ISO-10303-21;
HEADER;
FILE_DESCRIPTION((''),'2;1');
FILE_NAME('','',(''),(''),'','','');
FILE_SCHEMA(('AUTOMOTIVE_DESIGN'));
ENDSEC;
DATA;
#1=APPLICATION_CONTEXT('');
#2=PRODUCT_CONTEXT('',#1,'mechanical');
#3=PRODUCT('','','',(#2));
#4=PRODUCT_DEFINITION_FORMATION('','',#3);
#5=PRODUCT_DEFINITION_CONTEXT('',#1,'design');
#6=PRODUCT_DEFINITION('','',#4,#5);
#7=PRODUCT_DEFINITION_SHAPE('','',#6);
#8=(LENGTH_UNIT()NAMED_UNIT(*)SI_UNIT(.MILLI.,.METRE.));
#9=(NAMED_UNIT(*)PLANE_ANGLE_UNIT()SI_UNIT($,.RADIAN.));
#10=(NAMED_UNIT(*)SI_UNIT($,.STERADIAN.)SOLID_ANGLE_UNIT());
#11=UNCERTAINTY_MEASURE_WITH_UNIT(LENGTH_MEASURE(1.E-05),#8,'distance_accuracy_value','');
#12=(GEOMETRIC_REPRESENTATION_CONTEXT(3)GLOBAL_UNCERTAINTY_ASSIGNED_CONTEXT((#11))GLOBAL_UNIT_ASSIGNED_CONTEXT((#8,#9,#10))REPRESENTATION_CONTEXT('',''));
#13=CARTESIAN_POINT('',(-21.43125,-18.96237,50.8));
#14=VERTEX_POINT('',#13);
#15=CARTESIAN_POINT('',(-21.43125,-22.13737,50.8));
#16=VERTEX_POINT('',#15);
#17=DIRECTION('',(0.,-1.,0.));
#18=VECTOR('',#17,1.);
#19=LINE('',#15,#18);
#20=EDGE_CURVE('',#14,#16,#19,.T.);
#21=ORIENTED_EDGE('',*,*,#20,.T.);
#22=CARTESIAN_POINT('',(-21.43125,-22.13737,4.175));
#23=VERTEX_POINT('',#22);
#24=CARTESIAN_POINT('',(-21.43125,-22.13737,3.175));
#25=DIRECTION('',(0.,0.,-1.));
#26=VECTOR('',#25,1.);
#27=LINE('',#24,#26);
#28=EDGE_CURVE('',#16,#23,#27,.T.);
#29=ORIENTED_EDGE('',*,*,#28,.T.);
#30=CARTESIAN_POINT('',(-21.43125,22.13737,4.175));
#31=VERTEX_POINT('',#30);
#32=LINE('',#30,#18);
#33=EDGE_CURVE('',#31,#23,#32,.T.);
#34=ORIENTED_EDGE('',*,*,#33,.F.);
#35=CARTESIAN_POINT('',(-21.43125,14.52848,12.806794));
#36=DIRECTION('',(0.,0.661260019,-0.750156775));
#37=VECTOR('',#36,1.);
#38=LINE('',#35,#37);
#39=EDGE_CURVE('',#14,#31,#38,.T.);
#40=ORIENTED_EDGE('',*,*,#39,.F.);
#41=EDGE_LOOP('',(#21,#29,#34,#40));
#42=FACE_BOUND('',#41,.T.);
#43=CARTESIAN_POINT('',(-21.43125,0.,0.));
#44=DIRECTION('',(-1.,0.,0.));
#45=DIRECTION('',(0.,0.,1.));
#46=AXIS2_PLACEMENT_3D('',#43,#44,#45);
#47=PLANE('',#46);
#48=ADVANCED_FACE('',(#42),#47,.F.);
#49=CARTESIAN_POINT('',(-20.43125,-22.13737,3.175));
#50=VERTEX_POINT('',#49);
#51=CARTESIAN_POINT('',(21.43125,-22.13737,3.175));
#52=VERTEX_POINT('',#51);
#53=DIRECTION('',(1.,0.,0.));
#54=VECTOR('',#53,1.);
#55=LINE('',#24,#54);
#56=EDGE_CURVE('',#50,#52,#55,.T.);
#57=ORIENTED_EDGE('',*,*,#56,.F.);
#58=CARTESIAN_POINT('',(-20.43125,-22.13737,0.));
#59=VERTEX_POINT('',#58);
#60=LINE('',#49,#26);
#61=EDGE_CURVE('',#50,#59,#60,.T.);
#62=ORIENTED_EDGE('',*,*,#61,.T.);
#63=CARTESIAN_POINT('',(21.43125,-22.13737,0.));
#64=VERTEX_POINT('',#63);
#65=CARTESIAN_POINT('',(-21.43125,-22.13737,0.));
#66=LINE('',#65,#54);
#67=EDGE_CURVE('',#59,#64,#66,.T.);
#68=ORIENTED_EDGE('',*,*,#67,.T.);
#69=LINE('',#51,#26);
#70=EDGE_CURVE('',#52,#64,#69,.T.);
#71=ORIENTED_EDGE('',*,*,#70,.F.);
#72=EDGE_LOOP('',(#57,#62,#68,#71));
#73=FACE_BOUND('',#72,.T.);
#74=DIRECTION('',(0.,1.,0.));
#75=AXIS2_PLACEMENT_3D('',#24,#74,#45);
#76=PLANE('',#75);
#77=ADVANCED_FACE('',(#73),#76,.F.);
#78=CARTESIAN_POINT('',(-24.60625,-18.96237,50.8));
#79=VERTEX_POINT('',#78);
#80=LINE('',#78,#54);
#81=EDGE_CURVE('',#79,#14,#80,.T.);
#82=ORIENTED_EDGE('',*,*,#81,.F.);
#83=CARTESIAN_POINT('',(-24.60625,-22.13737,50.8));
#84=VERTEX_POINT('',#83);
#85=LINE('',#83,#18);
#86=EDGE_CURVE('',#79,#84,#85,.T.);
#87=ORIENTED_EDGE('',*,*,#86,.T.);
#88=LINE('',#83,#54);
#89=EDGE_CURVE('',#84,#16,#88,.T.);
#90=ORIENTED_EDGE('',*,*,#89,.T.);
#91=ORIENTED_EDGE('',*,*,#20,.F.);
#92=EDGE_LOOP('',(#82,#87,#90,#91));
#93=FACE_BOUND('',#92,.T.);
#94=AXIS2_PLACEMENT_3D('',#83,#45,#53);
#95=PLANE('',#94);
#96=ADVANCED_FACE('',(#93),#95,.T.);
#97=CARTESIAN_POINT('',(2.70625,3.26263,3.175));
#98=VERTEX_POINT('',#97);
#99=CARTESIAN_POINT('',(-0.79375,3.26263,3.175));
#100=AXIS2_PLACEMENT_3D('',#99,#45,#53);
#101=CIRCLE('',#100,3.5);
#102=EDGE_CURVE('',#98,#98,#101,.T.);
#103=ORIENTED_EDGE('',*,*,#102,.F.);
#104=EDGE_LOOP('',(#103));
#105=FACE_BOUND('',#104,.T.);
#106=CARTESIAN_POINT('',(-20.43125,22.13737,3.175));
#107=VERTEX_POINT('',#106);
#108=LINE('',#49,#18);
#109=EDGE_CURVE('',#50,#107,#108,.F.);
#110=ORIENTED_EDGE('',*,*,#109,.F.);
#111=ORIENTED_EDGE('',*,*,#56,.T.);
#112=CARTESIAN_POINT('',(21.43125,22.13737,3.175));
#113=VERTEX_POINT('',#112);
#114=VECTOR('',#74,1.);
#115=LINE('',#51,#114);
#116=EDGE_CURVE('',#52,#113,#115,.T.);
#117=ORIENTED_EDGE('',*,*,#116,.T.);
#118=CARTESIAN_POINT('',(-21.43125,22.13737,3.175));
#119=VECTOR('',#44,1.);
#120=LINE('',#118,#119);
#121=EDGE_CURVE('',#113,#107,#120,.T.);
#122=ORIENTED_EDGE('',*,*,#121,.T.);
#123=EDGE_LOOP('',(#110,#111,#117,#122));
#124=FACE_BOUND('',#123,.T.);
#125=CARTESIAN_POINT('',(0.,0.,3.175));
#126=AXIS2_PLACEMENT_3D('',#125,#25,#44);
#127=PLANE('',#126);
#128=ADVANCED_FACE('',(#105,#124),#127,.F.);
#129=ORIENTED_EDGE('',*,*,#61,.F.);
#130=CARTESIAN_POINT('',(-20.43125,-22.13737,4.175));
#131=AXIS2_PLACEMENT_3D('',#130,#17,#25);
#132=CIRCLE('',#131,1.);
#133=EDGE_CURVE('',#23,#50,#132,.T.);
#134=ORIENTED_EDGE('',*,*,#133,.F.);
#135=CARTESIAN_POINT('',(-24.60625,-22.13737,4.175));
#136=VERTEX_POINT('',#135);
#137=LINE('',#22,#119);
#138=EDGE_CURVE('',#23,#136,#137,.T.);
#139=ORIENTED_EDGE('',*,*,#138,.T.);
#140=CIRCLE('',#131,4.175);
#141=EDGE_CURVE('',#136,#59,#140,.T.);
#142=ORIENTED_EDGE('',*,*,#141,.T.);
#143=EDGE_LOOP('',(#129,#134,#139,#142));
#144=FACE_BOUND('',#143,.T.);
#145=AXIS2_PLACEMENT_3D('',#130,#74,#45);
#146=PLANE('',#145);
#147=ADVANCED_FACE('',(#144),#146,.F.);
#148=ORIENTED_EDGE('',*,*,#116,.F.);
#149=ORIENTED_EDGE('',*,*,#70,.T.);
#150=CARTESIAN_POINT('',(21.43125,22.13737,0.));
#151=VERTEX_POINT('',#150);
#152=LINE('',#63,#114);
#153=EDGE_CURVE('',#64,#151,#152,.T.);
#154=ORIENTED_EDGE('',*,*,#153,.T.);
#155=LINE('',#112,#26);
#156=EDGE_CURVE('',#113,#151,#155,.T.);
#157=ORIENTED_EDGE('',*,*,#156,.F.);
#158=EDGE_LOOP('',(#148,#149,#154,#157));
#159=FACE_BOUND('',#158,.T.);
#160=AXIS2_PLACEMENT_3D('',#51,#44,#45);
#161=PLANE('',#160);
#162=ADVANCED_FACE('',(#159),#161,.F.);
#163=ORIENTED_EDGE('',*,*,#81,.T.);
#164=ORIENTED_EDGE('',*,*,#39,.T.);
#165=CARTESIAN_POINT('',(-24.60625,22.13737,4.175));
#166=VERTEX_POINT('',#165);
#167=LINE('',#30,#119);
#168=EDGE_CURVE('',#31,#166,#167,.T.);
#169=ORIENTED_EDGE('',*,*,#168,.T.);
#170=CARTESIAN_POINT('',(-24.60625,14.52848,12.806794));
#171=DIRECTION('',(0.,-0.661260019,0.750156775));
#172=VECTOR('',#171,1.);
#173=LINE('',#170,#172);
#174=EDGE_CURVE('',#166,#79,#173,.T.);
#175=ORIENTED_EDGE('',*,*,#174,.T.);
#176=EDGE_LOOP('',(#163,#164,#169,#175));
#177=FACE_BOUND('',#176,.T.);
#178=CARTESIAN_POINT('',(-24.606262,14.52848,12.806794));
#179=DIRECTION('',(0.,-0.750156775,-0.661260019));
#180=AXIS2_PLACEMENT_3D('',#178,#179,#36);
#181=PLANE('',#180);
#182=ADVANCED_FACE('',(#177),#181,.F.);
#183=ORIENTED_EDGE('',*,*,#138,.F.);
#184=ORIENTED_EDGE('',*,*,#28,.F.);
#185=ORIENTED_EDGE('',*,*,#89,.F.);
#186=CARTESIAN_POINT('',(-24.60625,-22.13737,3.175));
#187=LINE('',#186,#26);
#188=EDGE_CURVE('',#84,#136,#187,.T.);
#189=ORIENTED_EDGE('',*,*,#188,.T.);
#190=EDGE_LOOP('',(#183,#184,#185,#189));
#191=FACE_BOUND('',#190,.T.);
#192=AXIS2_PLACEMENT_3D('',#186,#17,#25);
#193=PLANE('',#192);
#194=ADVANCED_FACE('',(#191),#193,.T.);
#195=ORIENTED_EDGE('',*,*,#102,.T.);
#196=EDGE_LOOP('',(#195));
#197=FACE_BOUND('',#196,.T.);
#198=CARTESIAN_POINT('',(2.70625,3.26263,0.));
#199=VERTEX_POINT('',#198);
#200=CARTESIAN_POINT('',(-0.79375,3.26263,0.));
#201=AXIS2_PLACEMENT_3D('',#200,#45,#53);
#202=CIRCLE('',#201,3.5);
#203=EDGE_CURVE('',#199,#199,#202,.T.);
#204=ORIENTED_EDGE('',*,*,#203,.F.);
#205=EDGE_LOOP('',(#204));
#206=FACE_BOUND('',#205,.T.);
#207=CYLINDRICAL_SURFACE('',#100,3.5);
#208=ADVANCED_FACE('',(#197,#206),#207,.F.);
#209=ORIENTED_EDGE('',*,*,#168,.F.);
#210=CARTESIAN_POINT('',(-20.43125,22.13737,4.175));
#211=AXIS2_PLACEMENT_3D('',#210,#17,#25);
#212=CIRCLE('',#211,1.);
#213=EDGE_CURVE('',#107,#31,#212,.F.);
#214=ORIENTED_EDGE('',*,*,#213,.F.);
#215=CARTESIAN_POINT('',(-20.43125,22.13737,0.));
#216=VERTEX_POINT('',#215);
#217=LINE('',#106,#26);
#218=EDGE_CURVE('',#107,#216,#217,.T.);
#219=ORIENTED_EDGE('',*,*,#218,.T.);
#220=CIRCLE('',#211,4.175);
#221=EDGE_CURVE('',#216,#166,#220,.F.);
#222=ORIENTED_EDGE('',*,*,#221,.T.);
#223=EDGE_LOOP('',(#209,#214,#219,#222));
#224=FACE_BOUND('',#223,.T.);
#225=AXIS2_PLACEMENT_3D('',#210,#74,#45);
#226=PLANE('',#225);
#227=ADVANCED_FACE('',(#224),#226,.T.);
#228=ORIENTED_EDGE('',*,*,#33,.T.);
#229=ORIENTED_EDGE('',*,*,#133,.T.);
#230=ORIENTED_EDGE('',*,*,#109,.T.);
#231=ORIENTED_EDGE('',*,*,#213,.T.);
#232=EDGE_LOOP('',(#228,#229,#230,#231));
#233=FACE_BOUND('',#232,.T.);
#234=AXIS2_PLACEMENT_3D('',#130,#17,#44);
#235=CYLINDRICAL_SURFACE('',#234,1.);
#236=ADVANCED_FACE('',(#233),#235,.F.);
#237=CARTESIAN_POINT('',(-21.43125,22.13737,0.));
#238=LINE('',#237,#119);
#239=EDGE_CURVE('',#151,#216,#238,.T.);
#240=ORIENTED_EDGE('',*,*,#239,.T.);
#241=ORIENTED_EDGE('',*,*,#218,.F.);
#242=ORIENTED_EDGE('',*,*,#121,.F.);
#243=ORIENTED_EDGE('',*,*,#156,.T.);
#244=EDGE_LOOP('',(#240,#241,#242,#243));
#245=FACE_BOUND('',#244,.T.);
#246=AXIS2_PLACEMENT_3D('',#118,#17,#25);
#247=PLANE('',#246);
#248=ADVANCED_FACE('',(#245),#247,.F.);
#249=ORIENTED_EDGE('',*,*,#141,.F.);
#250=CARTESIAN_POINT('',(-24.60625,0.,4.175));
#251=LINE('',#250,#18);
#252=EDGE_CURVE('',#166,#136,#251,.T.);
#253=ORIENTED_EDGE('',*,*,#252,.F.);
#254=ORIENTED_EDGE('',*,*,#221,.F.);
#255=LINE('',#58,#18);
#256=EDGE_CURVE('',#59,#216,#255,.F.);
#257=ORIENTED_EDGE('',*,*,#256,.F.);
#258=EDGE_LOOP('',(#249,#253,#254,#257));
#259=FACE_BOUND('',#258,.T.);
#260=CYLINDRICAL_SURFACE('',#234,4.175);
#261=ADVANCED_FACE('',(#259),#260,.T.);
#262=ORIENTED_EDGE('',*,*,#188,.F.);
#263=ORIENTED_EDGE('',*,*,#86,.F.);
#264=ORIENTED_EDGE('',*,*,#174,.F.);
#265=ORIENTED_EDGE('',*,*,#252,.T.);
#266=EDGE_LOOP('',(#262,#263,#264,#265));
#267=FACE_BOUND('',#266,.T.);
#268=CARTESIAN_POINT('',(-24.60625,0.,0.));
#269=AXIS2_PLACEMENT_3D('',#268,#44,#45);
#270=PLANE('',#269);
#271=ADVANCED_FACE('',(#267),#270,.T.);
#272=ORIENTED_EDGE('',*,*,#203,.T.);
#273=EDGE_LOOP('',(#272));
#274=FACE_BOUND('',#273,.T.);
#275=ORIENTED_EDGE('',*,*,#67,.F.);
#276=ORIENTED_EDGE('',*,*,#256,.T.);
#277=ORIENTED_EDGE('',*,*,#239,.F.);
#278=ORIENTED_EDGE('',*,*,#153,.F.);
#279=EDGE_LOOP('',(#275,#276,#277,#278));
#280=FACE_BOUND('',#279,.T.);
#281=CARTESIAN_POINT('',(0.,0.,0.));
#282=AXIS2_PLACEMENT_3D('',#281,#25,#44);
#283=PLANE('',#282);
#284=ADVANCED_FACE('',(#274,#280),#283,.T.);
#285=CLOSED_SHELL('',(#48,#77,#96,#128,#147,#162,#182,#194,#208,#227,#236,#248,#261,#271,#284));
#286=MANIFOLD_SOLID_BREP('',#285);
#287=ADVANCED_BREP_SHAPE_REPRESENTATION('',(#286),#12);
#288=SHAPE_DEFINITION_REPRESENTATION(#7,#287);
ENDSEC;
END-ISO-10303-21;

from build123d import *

# Parameters (mm, degrees)
SKETCH1_W                    = 42.8625
SKETCH1_H                    = 44.27474
SKETCH1_R                    = 3
BASE_FLANGE1_DEPTH           = 3.175
EDGE_FLANGE1_STRIP_W         = 14.7
EDGE_FLANGE1_STRIP_H         = 3.175
EDGE_FLANGE1_STRIP_CUT_DEPTH = 44.27474
EDGE_FLANGE1_DEPTH           = 44.27474
CUT_EXTRUDE1_DEPTH           = 73.0427273
CUT_EXTRUDE1_DEPTH_BACK      = 3.175
M6_CLEARANCE_HOLE6_D         = 7


# Sheet-metal steps are written as plain solids
with BuildPart() as part:
    # Sketch1 → Base-Flange1 (new body)
    with BuildSketch(Plane.XY):
        Rectangle(SKETCH1_W, SKETCH1_H)
        with Locations((-0.79375, 3.26263)):
            Circle(SKETCH1_R, mode=Mode.SUBTRACT)
    extrude(amount=BASE_FLANGE1_DEPTH)

    # Edge-Flange1 strip (across the edge) → Edge-Flange1 strip cut (cut)
    with BuildSketch(Plane(origin=(-21.43125, 22.13737, 3.175), x_dir=(1, 0, 0), z_dir=(0, -1, 0))):
        with Locations((-6.35, -1.5875)):
            Rectangle(EDGE_FLANGE1_STRIP_W, EDGE_FLANGE1_STRIP_H)
    extrude(amount=EDGE_FLANGE1_STRIP_CUT_DEPTH, mode=Mode.SUBTRACT)

    # Edge-Flange1 section (across the edge) → Edge-Flange1 (add)
    with BuildSketch(Plane(origin=(-21.43125, 22.13737, 3.175), x_dir=(1, 0, 0), z_dir=(0, -1, 0))):
        with BuildLine():
            Line((-3.175, 1), (-3.175, 47.625))
            Line((-3.175, 47.625), (0, 47.625))
            Line((0, 47.625), (0, 1))
            ThreePointArc((0, 1), (0.292893219, 0.292893219), (1, 0))
            Line((1, 0), (1, -3.175))
            ThreePointArc((1, -3.175), (-1.952170811, -1.952170811), (-3.175, 1))
        make_face()
    extrude(amount=EDGE_FLANGE1_DEPTH)

    # Sketch10 → Cut-Extrude1 (cut, two sides: drawn at the far end of the back side and taken through both)
    with BuildSketch(Plane.ZY.offset(24.60625).offset(-CUT_EXTRUDE1_DEPTH_BACK)):
        Polygon((4.175, 22.13737), (50.8, -18.96237), (50.8, 22.13737), align=None)
    extrude(amount=CUT_EXTRUDE1_DEPTH + CUT_EXTRUDE1_DEPTH_BACK, mode=Mode.SUBTRACT)

    # M6 Clearance Hole6 (through all)
    with Locations(Plane.XY.offset(3.175)):
        with Locations((-0.79375, 3.26263)):
            Hole(M6_CLEARANCE_HOLE6_D / 2)


solid = part.part
